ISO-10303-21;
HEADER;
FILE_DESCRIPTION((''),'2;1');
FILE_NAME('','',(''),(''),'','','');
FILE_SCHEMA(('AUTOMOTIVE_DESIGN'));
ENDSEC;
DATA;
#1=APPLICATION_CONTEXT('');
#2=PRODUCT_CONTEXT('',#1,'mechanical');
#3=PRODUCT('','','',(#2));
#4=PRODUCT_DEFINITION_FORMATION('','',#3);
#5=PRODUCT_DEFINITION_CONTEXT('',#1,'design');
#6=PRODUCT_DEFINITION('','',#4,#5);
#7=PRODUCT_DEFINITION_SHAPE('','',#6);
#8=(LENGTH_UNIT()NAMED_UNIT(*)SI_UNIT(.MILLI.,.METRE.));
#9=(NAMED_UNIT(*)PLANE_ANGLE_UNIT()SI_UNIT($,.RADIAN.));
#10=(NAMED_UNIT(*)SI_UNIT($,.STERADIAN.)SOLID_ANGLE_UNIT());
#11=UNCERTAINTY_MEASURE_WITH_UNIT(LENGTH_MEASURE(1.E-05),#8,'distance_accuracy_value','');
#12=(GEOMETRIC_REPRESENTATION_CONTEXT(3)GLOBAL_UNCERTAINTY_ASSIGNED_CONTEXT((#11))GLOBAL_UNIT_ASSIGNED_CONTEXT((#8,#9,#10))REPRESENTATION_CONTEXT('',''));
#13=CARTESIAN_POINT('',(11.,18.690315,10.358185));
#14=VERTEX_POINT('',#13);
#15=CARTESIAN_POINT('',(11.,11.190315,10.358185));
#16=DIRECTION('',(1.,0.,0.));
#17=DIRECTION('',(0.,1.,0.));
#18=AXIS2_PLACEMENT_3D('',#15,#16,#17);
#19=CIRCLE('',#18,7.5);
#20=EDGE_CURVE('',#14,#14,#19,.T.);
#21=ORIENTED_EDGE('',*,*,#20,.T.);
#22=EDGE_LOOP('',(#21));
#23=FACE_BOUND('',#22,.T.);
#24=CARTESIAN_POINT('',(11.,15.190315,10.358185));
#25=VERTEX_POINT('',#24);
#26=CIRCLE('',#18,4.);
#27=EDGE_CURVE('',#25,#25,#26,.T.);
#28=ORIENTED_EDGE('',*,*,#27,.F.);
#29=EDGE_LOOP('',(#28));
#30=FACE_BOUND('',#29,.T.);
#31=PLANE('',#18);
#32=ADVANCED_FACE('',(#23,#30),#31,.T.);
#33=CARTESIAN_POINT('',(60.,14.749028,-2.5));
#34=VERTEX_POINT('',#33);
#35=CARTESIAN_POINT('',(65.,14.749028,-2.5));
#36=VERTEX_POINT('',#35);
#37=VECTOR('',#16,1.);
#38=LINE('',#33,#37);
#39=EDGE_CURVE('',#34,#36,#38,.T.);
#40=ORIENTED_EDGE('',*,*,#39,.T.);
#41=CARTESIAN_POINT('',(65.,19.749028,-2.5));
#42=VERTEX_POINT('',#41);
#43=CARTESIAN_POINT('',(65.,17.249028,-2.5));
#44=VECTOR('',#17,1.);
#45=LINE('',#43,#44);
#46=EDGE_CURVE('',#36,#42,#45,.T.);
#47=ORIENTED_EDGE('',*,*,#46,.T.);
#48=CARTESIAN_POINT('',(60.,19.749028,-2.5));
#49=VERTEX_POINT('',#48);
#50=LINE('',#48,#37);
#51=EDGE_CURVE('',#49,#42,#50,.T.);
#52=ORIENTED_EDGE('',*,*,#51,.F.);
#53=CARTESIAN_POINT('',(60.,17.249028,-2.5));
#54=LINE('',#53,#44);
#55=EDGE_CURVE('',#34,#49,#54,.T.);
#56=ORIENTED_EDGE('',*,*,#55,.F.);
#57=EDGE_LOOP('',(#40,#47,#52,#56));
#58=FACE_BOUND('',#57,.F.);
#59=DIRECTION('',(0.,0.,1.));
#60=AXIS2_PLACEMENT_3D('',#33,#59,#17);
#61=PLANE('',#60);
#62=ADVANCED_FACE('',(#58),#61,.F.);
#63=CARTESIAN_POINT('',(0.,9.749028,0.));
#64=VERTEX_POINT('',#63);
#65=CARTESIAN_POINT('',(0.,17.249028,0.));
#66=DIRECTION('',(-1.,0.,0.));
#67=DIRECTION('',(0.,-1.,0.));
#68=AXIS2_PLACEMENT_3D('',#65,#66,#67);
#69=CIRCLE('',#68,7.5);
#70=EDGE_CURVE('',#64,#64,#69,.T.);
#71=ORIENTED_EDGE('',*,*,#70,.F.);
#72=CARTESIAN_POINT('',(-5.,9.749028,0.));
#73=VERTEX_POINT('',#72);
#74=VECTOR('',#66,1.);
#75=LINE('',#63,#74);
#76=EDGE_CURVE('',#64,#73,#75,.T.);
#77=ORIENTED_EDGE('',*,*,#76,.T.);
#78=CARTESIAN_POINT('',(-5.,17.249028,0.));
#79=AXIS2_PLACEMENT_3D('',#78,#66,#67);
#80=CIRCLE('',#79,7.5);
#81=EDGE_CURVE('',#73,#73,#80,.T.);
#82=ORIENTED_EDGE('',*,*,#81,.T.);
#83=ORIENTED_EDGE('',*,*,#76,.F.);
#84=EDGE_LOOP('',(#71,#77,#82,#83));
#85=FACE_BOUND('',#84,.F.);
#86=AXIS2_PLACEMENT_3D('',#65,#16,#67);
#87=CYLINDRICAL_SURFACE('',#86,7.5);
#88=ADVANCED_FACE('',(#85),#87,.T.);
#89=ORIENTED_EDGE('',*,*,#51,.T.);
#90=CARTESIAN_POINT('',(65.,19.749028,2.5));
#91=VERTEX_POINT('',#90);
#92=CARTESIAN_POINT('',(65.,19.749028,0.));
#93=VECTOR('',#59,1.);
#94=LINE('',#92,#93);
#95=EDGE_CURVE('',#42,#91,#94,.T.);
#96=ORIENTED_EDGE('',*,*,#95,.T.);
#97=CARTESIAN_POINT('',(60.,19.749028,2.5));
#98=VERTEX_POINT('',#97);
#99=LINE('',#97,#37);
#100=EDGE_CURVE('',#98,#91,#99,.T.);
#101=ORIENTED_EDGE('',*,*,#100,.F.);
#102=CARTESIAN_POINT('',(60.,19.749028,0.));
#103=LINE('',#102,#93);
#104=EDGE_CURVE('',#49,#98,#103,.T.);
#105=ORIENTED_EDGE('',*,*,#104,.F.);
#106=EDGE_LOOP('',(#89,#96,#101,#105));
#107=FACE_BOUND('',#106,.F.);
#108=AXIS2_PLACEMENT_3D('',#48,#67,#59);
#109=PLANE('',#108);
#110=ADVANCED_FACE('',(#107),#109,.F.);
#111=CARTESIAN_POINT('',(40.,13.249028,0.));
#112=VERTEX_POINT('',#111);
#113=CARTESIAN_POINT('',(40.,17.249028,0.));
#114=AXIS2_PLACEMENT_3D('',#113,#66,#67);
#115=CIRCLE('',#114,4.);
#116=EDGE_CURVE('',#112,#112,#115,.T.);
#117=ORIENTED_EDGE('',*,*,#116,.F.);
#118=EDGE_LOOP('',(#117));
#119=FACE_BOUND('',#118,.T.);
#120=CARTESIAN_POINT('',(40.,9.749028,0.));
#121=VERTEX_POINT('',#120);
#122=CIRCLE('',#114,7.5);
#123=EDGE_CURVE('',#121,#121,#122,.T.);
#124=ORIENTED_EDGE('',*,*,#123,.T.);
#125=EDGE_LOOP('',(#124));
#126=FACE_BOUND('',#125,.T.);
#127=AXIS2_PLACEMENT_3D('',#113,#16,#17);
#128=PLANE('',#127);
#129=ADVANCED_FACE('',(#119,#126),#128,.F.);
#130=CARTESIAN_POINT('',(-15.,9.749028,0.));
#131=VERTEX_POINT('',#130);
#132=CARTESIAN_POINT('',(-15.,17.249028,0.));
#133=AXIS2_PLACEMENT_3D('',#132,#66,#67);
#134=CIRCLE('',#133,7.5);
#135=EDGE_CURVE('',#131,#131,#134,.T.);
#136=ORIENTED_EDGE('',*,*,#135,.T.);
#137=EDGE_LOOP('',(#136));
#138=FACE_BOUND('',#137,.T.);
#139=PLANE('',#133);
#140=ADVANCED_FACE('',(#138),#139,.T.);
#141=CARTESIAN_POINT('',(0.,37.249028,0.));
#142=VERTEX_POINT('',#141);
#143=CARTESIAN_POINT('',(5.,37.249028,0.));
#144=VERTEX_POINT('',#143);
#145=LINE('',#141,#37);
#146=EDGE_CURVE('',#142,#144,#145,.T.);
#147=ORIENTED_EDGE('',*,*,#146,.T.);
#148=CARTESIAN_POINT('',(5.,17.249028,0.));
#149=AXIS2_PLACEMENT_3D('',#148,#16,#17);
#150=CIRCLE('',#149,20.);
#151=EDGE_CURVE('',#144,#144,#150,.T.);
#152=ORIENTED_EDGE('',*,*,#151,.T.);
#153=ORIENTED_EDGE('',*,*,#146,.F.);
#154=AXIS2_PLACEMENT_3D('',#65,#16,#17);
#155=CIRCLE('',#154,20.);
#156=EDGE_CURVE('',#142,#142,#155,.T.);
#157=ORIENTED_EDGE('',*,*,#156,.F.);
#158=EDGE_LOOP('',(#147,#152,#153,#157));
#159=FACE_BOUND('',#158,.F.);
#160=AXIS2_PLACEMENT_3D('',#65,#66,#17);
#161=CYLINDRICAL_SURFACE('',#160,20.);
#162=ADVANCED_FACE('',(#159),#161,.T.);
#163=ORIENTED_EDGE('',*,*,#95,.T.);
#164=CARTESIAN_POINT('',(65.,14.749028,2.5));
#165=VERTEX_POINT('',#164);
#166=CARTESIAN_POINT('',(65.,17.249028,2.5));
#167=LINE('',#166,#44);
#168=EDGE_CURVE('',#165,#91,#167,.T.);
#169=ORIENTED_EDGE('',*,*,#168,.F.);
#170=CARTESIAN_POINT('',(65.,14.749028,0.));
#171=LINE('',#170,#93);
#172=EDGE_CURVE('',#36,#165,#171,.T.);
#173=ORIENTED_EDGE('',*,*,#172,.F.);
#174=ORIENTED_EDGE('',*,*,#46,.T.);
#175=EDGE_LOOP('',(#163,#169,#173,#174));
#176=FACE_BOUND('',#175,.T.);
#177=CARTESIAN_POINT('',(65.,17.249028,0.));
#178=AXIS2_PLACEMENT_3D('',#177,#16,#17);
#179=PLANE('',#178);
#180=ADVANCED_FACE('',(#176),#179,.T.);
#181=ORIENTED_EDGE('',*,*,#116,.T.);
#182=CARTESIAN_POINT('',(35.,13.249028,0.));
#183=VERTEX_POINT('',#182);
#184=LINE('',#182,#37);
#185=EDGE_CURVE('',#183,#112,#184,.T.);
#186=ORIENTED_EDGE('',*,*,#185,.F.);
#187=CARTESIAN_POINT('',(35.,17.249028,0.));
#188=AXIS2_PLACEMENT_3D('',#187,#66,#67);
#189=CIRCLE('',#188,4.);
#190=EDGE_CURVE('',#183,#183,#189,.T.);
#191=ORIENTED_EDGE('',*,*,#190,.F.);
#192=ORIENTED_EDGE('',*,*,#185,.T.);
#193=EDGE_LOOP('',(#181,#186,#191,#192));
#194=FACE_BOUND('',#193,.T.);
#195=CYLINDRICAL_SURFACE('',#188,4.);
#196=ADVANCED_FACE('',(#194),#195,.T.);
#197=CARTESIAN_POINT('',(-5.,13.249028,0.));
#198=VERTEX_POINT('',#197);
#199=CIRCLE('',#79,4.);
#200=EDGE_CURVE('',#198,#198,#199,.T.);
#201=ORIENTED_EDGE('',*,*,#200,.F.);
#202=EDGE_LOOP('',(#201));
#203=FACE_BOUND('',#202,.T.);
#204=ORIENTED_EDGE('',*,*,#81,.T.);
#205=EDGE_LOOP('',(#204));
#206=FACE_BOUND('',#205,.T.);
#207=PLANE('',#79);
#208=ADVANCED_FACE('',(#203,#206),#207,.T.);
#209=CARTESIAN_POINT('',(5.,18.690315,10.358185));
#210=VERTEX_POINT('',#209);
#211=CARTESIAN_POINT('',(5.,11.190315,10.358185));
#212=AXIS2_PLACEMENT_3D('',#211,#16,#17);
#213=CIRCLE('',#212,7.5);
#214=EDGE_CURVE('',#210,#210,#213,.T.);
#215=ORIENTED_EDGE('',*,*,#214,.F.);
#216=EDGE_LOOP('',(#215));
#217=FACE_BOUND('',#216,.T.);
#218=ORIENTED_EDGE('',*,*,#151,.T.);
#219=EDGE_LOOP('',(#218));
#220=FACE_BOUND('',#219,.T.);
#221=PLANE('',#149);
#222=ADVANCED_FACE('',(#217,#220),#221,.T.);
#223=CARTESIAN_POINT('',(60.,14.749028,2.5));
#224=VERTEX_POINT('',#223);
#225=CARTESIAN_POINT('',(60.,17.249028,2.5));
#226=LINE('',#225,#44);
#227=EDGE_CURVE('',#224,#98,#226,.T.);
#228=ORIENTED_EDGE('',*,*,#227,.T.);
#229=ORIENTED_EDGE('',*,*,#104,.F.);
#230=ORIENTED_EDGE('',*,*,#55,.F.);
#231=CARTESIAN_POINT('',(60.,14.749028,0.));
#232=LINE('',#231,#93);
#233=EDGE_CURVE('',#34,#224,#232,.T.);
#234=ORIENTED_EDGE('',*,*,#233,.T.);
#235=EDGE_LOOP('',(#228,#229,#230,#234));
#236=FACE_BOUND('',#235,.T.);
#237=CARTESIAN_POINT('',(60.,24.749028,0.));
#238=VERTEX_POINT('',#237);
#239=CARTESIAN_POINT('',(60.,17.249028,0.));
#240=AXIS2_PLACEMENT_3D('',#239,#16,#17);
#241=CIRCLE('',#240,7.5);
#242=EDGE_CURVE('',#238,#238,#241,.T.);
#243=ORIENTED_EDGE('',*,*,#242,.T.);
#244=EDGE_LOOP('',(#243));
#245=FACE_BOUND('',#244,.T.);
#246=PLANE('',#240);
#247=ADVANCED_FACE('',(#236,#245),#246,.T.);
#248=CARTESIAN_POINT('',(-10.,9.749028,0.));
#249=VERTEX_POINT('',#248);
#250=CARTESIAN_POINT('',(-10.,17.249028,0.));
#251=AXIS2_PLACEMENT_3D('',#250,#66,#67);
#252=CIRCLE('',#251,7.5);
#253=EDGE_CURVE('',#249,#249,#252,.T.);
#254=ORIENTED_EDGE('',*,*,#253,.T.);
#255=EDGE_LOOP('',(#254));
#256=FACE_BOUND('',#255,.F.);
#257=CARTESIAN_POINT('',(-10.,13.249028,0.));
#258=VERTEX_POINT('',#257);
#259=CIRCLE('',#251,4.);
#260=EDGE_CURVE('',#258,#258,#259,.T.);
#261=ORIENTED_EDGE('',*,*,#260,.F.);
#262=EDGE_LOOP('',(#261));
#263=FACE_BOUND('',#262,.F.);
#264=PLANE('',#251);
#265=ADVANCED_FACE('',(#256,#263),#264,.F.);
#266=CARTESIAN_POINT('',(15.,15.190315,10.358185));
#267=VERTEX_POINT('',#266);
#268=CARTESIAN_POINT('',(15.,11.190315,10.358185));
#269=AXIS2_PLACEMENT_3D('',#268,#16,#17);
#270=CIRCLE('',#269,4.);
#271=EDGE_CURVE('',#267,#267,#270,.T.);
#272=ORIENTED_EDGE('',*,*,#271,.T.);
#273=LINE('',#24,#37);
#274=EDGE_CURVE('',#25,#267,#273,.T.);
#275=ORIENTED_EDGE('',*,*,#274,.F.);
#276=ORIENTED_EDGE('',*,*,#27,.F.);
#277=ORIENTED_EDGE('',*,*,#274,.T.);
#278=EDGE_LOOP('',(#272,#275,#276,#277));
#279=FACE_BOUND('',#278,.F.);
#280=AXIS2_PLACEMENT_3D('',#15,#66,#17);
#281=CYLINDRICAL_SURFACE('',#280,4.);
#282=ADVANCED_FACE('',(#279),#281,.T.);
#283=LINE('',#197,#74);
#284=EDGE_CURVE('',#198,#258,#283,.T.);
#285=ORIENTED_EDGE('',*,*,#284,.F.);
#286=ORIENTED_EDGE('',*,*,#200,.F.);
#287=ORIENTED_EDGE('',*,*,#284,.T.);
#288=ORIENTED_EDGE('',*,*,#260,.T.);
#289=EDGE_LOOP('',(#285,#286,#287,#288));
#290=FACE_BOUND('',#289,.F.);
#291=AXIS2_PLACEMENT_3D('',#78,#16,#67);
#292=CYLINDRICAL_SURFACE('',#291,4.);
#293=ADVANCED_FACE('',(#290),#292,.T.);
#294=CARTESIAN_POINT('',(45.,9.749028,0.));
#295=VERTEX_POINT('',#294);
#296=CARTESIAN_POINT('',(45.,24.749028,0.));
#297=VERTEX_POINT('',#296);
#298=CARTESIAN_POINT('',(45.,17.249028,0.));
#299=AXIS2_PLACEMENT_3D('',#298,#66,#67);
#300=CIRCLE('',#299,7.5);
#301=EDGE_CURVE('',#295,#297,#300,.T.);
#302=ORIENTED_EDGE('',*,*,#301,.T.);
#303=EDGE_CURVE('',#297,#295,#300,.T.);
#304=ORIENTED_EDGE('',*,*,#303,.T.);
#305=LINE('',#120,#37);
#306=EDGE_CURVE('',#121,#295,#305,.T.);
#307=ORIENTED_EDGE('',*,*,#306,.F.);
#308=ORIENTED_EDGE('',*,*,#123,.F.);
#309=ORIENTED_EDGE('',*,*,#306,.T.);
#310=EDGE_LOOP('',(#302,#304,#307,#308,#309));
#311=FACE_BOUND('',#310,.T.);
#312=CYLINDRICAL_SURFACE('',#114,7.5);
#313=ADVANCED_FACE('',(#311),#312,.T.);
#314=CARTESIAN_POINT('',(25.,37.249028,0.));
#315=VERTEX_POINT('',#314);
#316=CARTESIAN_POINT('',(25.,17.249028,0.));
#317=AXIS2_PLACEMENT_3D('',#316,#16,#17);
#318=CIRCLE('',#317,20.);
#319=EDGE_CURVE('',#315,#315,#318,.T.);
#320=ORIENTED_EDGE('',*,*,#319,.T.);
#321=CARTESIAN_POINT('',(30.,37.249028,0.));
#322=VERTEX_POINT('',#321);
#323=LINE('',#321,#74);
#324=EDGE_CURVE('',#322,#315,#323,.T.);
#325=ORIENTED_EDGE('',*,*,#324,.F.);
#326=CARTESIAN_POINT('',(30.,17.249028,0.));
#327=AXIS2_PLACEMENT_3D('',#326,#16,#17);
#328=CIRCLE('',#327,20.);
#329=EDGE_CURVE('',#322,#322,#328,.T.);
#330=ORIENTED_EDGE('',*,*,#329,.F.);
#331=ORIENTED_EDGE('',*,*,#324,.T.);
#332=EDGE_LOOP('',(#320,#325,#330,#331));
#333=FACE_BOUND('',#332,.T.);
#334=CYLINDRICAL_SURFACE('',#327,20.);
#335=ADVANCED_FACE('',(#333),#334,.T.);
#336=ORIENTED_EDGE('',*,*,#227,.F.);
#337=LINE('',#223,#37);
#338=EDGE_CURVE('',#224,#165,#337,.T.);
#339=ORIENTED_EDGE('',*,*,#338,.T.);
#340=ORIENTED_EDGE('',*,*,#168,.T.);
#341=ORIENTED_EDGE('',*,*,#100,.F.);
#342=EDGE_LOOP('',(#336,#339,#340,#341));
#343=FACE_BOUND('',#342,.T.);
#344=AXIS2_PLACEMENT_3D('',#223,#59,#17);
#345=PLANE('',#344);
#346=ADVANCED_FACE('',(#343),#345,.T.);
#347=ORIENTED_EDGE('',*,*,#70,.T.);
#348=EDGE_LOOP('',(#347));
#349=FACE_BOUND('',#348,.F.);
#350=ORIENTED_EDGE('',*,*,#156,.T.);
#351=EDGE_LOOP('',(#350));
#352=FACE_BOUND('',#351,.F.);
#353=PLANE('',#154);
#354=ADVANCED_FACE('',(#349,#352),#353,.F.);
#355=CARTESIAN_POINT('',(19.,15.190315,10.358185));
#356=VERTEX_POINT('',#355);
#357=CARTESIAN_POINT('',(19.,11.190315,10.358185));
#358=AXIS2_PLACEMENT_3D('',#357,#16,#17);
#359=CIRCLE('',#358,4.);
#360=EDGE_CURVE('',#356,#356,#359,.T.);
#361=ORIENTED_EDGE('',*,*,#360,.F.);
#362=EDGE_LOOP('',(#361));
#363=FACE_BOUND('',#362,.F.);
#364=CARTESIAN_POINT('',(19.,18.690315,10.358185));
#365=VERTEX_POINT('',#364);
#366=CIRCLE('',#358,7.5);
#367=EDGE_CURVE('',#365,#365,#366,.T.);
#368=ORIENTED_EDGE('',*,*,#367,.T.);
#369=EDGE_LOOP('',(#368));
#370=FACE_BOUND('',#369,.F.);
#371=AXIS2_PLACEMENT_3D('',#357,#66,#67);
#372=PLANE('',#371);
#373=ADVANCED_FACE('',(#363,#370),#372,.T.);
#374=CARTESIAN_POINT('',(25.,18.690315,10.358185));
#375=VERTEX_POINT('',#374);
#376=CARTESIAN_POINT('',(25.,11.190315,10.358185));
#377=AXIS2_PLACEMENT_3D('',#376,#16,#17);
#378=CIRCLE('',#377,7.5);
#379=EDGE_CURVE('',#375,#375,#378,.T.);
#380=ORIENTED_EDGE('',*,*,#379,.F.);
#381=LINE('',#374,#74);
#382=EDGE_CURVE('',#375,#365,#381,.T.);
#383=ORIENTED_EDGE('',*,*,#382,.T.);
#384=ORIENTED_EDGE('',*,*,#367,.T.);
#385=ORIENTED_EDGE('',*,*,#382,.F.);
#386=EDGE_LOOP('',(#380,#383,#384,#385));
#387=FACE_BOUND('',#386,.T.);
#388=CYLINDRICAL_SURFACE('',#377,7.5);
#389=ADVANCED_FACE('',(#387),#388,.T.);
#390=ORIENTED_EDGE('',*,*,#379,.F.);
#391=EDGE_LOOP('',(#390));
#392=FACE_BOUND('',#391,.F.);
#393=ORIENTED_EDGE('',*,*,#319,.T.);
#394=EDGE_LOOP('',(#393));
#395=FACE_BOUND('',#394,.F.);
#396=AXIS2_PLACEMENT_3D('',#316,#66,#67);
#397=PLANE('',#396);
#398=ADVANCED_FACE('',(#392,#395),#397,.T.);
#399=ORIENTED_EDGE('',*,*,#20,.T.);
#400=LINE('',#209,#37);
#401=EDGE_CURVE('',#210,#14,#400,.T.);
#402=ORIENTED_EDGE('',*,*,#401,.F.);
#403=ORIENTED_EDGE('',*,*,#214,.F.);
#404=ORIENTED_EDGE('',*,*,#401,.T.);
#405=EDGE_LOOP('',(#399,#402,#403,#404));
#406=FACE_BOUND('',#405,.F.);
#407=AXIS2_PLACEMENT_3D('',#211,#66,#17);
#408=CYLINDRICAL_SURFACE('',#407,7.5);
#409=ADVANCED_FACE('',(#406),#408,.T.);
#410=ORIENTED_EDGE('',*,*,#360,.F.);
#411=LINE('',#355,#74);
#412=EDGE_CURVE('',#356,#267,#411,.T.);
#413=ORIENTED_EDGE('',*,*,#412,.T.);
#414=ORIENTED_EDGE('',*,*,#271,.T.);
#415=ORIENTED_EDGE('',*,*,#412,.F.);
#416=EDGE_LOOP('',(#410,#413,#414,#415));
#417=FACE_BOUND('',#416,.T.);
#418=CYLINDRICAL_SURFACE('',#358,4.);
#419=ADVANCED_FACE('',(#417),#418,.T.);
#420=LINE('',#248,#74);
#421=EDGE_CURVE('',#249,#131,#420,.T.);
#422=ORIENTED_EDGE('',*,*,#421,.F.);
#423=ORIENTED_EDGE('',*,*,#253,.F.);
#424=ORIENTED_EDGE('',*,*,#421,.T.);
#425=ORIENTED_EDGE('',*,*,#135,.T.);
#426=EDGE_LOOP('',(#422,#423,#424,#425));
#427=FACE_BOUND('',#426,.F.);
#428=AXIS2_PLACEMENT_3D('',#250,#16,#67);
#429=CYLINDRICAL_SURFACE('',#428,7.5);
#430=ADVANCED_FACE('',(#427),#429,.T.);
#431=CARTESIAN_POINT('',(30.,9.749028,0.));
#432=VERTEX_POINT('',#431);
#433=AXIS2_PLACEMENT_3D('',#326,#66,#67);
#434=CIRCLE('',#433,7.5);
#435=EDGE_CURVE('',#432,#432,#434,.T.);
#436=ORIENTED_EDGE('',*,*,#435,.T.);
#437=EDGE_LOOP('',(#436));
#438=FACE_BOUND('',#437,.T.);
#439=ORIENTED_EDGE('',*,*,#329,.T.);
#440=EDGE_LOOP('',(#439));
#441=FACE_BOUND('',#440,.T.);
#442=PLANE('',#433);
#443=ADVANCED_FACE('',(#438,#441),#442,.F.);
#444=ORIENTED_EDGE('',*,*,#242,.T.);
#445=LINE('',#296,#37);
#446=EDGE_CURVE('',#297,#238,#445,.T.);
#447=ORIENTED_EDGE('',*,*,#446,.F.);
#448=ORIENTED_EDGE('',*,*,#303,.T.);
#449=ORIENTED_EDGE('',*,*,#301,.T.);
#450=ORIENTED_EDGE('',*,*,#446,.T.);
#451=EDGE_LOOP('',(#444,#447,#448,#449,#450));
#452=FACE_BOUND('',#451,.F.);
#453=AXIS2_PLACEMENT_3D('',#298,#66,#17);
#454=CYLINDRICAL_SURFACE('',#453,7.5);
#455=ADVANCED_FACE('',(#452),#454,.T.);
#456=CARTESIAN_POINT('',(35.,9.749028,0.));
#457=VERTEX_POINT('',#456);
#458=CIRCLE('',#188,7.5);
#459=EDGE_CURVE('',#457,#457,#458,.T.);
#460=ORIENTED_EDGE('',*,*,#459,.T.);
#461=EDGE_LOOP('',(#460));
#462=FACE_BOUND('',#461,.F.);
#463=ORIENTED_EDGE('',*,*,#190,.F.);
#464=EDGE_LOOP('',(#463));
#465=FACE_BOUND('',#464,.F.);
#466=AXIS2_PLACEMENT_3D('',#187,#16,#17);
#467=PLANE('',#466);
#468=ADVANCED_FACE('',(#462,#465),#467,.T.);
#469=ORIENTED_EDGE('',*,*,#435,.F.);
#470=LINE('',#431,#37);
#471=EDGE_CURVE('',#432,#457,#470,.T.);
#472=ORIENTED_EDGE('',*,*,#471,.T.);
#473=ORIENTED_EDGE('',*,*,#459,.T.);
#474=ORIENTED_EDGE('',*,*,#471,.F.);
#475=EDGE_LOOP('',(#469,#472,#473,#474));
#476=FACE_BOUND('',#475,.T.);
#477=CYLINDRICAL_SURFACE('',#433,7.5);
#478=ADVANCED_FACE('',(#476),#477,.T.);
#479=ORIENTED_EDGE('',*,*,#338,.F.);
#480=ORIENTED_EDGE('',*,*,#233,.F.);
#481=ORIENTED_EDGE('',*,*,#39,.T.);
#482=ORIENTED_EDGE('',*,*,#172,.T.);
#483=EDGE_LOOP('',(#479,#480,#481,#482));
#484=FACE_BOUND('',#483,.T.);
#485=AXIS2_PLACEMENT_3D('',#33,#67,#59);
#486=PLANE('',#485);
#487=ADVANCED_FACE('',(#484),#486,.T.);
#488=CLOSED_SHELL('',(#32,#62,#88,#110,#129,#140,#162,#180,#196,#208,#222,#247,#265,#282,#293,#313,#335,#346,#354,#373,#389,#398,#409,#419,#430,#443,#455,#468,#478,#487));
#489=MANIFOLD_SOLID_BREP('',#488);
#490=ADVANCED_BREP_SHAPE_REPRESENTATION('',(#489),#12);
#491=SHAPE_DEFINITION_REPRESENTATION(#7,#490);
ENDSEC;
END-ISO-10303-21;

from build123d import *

# Parameters (mm, degrees)
F0_R      = 20
F1_DEPTH  = 5
F3_R      = 7.5
F4_DEPTH  = 5
F5_R      = 4
F6_DEPTH  = 5
F7_R      = 7.5
F7_R_2    = 4
F8_DEPTH  = 5
F2_R      = 7.5
F9_DEPTH  = 6
F10_R     = 4
F11_DEPTH = 4
F13_R     = 7.5
F14_DEPTH = 15
F15_W     = 5
F15_H     = 5
F16_DEPTH = 5


with BuildPart() as f1:
    # F0 (on Right) → F1 (new body)
    with BuildSketch(Plane.YZ):
        with Locations((17.2490278537, 0)):
            Circle(F0_R)
    extrude(amount=F1_DEPTH)

    # F3 (on face) → F4 (join)
    with BuildSketch(Plane(origin=(0, 0, 0), x_dir=(0, -1, 0), z_dir=(-1, 0, 0))):
        with Locations((-17.2490278537, 0)):
            Circle(F3_R)
    extrude(amount=F4_DEPTH)

    # F5 (on face) → F6 (join)
    with BuildSketch(Plane(origin=(-5, 0, 0), x_dir=(0, -1, 0), z_dir=(-1, 0, 0))):
        with Locations((-17.2490278537, 0)):
            Circle(F5_R)
    extrude(amount=F6_DEPTH)

    # F7 (on face) → F8 (join)
    with BuildSketch(Plane(origin=(-10, 0, 0), x_dir=(0, -1, 0), z_dir=(-1, 0, 0))):
        with Locations((-17.2490278537, 0)):
            Circle(F7_R)
        with Locations((-17.2490278537, 0)):
            Circle(F7_R_2, mode=Mode.SUBTRACT)
        with Locations((-17.2490278537, 0)):
            Circle(F7_R_2)
    extrude(amount=F8_DEPTH)

    # F2 (on face) → F9 (join)
    with BuildSketch(Plane.YZ.offset(5)):
        with Locations((11.1903151186, 10.3581851689)):
            Circle(F2_R)
    extrude(amount=F9_DEPTH)

    # F10 (on face) → F11 (join)
    with BuildSketch(Plane.YZ.offset(11)):
        with Locations((11.1903151186, 10.3581851689)):
            Circle(F10_R)
    extrude(amount=F11_DEPTH)

    # F12: F1 across face


with BuildPart() as f1_1:
    add(f1.part)
    add(f1.part.mirror(Plane(origin=(15, 11.1903151186, 10.3581851689), x_dir=(0, 1, 0), z_dir=(1, 0, 0))))

    # F13 (on face) → F14 (join)
    with BuildSketch(Plane.YZ.offset(45)):
        with Locations((17.2490278537, 0)):
            Circle(F13_R)
    extrude(amount=F14_DEPTH)

    # F15 (on face) → F16 (join)
    with BuildSketch(Plane.YZ.offset(60)):
        with Locations((17.2490278537, 0)):
            Rectangle(F15_W, F15_H)
    extrude(amount=F16_DEPTH)


solid = f1_1.part
